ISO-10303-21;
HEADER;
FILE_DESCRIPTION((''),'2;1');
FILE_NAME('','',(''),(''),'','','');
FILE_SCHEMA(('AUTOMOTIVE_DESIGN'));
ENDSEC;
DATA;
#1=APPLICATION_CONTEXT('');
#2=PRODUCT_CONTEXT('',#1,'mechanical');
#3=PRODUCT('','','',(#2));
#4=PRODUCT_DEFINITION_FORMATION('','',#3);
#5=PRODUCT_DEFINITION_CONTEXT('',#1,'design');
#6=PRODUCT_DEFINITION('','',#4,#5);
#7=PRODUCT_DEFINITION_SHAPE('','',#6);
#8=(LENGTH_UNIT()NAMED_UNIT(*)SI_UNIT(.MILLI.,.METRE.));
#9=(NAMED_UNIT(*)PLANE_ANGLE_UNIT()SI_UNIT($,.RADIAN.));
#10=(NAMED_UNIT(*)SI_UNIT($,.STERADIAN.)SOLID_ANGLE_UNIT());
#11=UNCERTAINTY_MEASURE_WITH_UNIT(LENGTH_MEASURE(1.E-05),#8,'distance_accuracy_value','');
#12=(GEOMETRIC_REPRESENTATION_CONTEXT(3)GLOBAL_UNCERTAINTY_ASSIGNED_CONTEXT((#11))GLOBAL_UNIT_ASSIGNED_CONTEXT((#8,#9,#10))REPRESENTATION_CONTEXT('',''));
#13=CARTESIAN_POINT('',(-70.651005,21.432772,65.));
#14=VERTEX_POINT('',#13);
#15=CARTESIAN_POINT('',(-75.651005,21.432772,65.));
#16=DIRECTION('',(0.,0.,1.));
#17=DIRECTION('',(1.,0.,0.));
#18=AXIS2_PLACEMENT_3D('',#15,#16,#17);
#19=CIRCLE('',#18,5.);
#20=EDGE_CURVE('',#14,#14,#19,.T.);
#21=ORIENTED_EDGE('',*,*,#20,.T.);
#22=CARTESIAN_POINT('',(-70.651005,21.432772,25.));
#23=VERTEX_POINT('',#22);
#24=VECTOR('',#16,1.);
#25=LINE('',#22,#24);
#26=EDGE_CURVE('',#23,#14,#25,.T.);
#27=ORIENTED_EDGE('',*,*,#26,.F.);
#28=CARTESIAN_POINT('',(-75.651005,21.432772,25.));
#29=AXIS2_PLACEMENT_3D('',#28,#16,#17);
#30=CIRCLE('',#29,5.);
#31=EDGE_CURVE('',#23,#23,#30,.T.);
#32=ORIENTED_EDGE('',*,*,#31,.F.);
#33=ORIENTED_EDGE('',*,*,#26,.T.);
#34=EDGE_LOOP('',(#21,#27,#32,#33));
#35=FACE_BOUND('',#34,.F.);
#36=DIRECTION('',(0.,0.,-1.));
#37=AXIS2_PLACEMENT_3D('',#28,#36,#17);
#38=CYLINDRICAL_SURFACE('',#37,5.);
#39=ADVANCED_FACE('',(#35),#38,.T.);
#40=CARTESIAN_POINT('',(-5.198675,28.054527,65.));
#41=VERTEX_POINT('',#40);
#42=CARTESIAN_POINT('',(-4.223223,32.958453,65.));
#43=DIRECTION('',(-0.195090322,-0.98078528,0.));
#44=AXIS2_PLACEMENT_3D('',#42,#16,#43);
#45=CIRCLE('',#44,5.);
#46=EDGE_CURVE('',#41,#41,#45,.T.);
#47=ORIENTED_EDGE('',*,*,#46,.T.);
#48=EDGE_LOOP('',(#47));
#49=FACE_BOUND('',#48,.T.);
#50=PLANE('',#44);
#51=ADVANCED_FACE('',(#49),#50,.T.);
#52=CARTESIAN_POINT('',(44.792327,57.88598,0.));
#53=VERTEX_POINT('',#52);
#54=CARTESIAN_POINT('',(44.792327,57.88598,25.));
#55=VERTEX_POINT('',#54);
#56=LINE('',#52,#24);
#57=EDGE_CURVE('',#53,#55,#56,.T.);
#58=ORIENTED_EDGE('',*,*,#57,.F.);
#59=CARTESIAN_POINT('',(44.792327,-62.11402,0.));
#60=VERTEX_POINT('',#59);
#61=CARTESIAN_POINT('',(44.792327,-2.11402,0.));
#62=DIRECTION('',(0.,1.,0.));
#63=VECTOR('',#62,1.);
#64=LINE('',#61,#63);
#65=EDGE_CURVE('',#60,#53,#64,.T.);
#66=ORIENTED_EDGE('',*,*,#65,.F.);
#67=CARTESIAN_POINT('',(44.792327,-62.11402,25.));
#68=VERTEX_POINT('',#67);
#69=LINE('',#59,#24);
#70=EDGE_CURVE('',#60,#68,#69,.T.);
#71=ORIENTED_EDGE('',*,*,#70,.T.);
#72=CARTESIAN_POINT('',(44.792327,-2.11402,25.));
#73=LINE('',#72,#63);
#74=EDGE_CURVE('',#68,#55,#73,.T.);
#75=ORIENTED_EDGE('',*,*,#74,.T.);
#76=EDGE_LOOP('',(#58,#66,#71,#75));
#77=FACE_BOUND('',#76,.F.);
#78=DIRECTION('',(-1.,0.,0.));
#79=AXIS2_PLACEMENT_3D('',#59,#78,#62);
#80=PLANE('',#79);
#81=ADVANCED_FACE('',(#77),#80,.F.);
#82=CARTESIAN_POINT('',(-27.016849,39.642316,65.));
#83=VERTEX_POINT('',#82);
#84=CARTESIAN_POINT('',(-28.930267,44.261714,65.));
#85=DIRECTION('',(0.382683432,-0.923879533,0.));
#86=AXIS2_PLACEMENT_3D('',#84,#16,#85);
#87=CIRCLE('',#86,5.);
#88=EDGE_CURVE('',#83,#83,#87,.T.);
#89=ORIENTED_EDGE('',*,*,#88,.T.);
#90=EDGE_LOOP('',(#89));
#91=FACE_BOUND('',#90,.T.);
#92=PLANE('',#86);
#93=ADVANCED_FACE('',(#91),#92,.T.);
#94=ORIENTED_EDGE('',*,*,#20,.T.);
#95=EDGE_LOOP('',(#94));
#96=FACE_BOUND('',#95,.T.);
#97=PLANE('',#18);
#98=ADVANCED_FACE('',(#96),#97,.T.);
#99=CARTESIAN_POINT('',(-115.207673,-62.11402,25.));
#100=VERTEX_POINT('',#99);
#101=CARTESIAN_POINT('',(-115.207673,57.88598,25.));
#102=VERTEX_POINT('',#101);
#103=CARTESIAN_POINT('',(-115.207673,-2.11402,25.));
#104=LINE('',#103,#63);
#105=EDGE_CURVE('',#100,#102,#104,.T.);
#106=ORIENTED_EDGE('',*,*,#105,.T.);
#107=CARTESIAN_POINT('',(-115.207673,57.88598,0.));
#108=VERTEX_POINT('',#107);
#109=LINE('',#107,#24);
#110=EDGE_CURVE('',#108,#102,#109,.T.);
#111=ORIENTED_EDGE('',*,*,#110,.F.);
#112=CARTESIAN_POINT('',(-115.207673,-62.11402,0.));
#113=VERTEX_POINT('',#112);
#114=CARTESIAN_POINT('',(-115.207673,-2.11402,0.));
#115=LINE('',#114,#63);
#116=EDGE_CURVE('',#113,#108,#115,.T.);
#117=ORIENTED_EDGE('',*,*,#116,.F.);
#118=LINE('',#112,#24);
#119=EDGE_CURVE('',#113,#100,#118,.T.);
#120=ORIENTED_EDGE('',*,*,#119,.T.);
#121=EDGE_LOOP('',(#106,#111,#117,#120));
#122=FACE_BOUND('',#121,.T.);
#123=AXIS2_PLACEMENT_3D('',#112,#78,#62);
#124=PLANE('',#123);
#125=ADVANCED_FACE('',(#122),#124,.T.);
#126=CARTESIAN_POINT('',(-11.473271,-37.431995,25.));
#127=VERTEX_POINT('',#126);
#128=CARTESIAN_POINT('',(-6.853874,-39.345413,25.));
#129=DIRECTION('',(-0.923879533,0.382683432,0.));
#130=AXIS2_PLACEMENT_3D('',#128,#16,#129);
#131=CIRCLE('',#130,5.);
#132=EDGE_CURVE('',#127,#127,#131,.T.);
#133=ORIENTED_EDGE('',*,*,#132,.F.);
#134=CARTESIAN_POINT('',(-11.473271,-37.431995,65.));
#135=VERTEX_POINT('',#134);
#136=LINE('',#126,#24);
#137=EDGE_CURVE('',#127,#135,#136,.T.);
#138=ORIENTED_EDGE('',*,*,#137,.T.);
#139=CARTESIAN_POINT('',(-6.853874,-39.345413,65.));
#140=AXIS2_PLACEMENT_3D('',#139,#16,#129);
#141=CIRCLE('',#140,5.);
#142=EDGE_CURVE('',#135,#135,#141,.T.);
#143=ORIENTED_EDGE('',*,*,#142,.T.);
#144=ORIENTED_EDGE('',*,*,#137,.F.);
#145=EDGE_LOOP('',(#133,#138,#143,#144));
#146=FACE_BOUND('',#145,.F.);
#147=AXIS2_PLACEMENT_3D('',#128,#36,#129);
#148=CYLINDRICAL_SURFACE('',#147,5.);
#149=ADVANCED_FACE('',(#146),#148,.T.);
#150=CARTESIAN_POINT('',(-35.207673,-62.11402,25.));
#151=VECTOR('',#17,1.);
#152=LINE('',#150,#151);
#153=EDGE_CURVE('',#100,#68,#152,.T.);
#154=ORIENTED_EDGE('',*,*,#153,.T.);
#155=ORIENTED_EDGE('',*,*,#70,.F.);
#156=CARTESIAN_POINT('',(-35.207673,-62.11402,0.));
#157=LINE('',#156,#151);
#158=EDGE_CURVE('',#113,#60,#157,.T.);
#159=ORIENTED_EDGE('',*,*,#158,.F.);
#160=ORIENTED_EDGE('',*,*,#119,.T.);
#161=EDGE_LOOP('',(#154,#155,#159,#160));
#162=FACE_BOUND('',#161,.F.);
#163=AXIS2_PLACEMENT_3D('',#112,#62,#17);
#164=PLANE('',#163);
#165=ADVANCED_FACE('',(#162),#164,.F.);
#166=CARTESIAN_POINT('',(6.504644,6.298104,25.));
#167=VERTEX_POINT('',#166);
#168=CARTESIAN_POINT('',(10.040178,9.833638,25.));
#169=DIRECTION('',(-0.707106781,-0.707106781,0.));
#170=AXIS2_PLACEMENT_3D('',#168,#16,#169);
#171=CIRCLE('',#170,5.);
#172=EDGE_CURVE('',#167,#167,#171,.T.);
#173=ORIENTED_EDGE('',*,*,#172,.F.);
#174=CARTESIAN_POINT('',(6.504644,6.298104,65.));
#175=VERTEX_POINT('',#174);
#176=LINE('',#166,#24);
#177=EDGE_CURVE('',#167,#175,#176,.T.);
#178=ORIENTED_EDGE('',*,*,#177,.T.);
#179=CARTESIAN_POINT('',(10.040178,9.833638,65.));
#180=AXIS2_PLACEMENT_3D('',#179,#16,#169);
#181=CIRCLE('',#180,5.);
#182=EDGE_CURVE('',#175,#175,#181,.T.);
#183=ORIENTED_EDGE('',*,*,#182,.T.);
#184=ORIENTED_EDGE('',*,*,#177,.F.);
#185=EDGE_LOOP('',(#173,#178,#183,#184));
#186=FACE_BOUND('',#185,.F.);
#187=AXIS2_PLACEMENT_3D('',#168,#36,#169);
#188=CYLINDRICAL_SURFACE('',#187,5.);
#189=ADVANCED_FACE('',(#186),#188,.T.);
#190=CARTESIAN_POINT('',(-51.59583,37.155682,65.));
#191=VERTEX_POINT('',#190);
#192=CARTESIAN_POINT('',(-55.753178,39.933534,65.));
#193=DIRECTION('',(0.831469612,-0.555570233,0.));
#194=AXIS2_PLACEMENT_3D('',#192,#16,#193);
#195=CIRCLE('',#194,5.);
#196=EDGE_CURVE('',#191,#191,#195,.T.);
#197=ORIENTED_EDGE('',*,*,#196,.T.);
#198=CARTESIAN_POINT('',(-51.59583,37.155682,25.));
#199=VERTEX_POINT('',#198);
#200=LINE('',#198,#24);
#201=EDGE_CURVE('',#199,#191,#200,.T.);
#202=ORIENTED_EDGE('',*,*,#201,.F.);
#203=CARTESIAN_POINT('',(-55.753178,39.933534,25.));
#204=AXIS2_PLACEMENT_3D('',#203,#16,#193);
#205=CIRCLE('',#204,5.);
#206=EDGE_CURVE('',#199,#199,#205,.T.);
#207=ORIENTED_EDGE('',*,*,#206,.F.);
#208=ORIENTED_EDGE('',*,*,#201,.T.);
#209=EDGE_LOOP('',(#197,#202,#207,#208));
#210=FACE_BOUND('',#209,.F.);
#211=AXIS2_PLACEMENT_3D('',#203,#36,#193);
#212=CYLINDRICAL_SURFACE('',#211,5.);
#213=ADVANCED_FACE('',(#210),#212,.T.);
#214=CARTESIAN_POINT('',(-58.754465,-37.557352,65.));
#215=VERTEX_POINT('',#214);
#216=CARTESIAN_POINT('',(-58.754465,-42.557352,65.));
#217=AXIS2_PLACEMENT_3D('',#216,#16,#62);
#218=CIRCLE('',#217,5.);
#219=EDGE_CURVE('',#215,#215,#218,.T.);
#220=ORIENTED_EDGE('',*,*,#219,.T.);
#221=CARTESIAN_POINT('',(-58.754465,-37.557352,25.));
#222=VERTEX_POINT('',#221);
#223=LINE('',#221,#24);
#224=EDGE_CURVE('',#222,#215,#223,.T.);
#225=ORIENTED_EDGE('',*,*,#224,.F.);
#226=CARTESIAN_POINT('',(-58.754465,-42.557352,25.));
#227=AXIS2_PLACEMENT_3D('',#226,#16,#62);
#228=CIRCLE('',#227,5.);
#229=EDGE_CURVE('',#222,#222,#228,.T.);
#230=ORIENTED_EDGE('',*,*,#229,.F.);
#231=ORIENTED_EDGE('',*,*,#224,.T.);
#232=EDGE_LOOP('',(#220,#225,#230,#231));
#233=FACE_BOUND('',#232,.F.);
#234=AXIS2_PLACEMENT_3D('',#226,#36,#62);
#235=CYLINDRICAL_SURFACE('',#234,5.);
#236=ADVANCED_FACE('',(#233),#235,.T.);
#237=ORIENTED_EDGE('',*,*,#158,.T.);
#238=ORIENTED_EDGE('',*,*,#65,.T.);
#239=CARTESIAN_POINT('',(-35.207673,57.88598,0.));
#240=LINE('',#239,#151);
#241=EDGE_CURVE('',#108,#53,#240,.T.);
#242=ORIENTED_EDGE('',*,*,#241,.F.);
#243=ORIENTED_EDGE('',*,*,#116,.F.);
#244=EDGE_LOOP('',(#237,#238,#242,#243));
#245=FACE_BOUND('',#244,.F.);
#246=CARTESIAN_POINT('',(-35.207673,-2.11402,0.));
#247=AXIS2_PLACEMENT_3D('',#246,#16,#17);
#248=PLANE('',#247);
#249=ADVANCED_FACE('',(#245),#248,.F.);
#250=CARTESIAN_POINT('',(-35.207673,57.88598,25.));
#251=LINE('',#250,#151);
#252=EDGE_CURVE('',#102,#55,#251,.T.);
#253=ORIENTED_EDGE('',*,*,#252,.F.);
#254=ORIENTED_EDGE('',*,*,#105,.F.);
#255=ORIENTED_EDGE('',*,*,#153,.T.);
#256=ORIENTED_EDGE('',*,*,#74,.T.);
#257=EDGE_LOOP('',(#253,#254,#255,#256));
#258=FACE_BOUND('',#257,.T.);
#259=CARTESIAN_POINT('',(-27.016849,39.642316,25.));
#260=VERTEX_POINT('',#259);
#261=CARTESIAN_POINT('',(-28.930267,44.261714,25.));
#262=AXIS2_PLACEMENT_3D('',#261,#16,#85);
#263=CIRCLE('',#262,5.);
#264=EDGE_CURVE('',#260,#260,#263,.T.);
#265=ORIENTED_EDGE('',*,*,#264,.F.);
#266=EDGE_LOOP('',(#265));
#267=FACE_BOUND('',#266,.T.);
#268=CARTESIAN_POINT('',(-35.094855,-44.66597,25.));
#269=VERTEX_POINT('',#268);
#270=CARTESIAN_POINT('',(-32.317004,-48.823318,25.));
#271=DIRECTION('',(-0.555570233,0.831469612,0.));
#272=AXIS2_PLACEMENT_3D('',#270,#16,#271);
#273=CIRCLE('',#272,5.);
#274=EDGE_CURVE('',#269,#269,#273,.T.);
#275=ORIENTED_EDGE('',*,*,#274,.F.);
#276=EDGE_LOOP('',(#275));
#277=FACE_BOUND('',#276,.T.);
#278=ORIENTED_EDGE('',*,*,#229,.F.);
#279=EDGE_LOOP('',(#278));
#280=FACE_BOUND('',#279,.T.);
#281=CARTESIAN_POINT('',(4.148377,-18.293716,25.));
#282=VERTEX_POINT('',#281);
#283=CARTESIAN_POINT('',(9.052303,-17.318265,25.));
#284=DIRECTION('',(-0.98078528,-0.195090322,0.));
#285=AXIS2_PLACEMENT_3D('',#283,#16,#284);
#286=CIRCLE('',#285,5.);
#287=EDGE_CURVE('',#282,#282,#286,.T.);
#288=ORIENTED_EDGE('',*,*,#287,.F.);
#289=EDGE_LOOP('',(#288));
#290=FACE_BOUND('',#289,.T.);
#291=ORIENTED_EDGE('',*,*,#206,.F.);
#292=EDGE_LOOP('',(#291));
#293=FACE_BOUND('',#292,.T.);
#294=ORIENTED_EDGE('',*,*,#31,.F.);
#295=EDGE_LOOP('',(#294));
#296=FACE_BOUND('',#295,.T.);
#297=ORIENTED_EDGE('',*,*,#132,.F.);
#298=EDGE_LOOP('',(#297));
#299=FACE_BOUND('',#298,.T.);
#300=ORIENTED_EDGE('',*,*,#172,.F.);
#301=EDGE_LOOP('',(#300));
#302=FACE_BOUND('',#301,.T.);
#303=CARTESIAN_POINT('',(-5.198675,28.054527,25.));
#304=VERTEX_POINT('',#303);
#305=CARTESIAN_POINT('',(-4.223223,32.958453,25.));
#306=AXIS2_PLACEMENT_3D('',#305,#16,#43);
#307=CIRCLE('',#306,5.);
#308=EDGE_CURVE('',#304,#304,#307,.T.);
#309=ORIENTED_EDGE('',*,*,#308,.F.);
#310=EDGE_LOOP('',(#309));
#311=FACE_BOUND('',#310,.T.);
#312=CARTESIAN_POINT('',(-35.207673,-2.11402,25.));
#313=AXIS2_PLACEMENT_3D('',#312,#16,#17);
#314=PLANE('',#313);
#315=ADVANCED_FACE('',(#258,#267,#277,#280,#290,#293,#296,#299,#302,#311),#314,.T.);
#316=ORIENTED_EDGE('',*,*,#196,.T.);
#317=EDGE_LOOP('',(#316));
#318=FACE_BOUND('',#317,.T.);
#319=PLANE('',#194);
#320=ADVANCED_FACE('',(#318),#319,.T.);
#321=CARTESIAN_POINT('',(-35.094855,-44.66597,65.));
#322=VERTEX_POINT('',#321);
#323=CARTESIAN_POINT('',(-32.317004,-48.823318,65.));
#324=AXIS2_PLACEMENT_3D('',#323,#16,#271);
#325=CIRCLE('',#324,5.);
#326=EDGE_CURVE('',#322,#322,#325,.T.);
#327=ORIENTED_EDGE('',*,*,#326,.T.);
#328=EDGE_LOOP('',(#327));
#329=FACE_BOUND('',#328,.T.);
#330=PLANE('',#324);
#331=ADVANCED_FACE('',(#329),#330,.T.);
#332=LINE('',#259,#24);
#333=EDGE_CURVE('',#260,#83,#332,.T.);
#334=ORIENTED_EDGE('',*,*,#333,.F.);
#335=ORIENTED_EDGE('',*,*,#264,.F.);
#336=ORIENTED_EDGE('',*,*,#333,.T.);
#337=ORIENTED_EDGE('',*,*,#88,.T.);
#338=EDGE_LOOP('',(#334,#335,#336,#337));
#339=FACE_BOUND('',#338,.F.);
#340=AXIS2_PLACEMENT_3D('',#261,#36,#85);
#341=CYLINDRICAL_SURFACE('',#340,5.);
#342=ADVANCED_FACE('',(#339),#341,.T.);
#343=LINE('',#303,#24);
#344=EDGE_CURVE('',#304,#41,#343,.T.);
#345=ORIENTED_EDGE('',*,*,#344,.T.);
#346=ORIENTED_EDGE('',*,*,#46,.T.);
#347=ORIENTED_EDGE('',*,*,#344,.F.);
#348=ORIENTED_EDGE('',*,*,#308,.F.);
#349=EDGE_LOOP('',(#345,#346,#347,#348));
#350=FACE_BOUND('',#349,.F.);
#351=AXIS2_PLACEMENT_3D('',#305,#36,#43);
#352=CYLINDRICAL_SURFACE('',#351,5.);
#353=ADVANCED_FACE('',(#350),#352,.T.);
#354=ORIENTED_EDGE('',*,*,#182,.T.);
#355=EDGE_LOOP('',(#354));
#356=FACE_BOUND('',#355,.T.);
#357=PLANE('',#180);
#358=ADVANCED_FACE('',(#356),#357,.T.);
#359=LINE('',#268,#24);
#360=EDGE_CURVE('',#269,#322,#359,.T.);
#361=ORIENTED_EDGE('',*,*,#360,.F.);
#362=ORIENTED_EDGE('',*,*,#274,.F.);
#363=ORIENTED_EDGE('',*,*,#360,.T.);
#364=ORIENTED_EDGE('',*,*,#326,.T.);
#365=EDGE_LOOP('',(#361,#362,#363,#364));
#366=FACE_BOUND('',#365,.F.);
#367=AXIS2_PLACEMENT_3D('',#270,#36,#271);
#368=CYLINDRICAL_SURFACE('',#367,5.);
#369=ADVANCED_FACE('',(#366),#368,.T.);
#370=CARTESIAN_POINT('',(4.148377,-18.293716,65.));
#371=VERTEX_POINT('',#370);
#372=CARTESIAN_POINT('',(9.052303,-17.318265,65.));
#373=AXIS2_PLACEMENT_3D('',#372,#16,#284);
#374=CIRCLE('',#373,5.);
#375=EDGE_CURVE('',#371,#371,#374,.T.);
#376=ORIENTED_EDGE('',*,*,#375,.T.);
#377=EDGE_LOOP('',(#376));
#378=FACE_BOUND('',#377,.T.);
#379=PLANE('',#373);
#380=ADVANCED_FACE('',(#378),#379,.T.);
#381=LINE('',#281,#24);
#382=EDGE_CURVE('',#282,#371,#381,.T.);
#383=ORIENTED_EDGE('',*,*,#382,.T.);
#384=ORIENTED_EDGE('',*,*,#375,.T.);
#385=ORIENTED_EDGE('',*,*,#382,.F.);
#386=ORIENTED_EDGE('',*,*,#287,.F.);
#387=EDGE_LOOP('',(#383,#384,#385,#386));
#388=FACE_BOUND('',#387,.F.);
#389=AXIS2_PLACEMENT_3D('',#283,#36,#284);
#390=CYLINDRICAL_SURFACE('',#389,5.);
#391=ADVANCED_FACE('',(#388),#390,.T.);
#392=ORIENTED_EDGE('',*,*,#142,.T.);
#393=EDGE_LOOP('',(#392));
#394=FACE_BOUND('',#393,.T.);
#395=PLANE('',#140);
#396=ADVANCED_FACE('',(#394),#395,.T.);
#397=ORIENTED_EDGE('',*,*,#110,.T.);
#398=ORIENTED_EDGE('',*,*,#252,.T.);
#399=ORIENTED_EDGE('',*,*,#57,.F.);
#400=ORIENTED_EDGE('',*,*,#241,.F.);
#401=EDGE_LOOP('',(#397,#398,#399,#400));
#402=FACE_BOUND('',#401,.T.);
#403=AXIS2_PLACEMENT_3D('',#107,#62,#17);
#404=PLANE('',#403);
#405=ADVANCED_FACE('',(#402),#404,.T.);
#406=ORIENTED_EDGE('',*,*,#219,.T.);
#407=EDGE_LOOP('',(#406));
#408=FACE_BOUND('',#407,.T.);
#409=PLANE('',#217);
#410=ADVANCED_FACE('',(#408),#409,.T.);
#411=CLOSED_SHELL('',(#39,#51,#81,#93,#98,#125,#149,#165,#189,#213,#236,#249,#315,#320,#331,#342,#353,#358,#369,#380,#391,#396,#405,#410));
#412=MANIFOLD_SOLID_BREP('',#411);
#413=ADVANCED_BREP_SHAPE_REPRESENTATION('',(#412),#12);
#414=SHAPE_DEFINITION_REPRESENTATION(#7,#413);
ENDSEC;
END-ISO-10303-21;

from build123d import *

# Parameters (mm, degrees)
F0_W            = 160
F0_H            = 120
F1_DEPTH        = 25
F2_R            = 5
F4_DEPTH        = 40
F4_COPIES_COUNT = 9
F4_COPIES_ANGLE = 270


# Not quite as in the source:
# - a pattern or mirror of a feature is missing from the dataset's text; its kind, count and spacing are read off the source's solid


with BuildPart() as f1:
    # F0 (on Top) → F1 (new body)
    with BuildSketch(Plane.XY):
        with Locations((-35.207672789, -2.114020288)):
            Rectangle(F0_W, F0_H)
    extrude(amount=F1_DEPTH)

    # F2 (on face) → F4 (join)
    with BuildSketch(Plane.XY.offset(25)):
        with Locations((-75.6510049105, 21.4327722788)):
            Circle(F2_R)
    f4 = extrude(amount=F4_DEPTH)

    # F4_copies: F4 ×9 about axis
    f4_copies_axis = Axis((-35.207673, -2.11402, 0), (0, 0, -1))
    for i in range(1, F4_COPIES_COUNT):
        add(f4.rotate(f4_copies_axis, i * F4_COPIES_ANGLE / (F4_COPIES_COUNT - 1)))


solid = f1.part
